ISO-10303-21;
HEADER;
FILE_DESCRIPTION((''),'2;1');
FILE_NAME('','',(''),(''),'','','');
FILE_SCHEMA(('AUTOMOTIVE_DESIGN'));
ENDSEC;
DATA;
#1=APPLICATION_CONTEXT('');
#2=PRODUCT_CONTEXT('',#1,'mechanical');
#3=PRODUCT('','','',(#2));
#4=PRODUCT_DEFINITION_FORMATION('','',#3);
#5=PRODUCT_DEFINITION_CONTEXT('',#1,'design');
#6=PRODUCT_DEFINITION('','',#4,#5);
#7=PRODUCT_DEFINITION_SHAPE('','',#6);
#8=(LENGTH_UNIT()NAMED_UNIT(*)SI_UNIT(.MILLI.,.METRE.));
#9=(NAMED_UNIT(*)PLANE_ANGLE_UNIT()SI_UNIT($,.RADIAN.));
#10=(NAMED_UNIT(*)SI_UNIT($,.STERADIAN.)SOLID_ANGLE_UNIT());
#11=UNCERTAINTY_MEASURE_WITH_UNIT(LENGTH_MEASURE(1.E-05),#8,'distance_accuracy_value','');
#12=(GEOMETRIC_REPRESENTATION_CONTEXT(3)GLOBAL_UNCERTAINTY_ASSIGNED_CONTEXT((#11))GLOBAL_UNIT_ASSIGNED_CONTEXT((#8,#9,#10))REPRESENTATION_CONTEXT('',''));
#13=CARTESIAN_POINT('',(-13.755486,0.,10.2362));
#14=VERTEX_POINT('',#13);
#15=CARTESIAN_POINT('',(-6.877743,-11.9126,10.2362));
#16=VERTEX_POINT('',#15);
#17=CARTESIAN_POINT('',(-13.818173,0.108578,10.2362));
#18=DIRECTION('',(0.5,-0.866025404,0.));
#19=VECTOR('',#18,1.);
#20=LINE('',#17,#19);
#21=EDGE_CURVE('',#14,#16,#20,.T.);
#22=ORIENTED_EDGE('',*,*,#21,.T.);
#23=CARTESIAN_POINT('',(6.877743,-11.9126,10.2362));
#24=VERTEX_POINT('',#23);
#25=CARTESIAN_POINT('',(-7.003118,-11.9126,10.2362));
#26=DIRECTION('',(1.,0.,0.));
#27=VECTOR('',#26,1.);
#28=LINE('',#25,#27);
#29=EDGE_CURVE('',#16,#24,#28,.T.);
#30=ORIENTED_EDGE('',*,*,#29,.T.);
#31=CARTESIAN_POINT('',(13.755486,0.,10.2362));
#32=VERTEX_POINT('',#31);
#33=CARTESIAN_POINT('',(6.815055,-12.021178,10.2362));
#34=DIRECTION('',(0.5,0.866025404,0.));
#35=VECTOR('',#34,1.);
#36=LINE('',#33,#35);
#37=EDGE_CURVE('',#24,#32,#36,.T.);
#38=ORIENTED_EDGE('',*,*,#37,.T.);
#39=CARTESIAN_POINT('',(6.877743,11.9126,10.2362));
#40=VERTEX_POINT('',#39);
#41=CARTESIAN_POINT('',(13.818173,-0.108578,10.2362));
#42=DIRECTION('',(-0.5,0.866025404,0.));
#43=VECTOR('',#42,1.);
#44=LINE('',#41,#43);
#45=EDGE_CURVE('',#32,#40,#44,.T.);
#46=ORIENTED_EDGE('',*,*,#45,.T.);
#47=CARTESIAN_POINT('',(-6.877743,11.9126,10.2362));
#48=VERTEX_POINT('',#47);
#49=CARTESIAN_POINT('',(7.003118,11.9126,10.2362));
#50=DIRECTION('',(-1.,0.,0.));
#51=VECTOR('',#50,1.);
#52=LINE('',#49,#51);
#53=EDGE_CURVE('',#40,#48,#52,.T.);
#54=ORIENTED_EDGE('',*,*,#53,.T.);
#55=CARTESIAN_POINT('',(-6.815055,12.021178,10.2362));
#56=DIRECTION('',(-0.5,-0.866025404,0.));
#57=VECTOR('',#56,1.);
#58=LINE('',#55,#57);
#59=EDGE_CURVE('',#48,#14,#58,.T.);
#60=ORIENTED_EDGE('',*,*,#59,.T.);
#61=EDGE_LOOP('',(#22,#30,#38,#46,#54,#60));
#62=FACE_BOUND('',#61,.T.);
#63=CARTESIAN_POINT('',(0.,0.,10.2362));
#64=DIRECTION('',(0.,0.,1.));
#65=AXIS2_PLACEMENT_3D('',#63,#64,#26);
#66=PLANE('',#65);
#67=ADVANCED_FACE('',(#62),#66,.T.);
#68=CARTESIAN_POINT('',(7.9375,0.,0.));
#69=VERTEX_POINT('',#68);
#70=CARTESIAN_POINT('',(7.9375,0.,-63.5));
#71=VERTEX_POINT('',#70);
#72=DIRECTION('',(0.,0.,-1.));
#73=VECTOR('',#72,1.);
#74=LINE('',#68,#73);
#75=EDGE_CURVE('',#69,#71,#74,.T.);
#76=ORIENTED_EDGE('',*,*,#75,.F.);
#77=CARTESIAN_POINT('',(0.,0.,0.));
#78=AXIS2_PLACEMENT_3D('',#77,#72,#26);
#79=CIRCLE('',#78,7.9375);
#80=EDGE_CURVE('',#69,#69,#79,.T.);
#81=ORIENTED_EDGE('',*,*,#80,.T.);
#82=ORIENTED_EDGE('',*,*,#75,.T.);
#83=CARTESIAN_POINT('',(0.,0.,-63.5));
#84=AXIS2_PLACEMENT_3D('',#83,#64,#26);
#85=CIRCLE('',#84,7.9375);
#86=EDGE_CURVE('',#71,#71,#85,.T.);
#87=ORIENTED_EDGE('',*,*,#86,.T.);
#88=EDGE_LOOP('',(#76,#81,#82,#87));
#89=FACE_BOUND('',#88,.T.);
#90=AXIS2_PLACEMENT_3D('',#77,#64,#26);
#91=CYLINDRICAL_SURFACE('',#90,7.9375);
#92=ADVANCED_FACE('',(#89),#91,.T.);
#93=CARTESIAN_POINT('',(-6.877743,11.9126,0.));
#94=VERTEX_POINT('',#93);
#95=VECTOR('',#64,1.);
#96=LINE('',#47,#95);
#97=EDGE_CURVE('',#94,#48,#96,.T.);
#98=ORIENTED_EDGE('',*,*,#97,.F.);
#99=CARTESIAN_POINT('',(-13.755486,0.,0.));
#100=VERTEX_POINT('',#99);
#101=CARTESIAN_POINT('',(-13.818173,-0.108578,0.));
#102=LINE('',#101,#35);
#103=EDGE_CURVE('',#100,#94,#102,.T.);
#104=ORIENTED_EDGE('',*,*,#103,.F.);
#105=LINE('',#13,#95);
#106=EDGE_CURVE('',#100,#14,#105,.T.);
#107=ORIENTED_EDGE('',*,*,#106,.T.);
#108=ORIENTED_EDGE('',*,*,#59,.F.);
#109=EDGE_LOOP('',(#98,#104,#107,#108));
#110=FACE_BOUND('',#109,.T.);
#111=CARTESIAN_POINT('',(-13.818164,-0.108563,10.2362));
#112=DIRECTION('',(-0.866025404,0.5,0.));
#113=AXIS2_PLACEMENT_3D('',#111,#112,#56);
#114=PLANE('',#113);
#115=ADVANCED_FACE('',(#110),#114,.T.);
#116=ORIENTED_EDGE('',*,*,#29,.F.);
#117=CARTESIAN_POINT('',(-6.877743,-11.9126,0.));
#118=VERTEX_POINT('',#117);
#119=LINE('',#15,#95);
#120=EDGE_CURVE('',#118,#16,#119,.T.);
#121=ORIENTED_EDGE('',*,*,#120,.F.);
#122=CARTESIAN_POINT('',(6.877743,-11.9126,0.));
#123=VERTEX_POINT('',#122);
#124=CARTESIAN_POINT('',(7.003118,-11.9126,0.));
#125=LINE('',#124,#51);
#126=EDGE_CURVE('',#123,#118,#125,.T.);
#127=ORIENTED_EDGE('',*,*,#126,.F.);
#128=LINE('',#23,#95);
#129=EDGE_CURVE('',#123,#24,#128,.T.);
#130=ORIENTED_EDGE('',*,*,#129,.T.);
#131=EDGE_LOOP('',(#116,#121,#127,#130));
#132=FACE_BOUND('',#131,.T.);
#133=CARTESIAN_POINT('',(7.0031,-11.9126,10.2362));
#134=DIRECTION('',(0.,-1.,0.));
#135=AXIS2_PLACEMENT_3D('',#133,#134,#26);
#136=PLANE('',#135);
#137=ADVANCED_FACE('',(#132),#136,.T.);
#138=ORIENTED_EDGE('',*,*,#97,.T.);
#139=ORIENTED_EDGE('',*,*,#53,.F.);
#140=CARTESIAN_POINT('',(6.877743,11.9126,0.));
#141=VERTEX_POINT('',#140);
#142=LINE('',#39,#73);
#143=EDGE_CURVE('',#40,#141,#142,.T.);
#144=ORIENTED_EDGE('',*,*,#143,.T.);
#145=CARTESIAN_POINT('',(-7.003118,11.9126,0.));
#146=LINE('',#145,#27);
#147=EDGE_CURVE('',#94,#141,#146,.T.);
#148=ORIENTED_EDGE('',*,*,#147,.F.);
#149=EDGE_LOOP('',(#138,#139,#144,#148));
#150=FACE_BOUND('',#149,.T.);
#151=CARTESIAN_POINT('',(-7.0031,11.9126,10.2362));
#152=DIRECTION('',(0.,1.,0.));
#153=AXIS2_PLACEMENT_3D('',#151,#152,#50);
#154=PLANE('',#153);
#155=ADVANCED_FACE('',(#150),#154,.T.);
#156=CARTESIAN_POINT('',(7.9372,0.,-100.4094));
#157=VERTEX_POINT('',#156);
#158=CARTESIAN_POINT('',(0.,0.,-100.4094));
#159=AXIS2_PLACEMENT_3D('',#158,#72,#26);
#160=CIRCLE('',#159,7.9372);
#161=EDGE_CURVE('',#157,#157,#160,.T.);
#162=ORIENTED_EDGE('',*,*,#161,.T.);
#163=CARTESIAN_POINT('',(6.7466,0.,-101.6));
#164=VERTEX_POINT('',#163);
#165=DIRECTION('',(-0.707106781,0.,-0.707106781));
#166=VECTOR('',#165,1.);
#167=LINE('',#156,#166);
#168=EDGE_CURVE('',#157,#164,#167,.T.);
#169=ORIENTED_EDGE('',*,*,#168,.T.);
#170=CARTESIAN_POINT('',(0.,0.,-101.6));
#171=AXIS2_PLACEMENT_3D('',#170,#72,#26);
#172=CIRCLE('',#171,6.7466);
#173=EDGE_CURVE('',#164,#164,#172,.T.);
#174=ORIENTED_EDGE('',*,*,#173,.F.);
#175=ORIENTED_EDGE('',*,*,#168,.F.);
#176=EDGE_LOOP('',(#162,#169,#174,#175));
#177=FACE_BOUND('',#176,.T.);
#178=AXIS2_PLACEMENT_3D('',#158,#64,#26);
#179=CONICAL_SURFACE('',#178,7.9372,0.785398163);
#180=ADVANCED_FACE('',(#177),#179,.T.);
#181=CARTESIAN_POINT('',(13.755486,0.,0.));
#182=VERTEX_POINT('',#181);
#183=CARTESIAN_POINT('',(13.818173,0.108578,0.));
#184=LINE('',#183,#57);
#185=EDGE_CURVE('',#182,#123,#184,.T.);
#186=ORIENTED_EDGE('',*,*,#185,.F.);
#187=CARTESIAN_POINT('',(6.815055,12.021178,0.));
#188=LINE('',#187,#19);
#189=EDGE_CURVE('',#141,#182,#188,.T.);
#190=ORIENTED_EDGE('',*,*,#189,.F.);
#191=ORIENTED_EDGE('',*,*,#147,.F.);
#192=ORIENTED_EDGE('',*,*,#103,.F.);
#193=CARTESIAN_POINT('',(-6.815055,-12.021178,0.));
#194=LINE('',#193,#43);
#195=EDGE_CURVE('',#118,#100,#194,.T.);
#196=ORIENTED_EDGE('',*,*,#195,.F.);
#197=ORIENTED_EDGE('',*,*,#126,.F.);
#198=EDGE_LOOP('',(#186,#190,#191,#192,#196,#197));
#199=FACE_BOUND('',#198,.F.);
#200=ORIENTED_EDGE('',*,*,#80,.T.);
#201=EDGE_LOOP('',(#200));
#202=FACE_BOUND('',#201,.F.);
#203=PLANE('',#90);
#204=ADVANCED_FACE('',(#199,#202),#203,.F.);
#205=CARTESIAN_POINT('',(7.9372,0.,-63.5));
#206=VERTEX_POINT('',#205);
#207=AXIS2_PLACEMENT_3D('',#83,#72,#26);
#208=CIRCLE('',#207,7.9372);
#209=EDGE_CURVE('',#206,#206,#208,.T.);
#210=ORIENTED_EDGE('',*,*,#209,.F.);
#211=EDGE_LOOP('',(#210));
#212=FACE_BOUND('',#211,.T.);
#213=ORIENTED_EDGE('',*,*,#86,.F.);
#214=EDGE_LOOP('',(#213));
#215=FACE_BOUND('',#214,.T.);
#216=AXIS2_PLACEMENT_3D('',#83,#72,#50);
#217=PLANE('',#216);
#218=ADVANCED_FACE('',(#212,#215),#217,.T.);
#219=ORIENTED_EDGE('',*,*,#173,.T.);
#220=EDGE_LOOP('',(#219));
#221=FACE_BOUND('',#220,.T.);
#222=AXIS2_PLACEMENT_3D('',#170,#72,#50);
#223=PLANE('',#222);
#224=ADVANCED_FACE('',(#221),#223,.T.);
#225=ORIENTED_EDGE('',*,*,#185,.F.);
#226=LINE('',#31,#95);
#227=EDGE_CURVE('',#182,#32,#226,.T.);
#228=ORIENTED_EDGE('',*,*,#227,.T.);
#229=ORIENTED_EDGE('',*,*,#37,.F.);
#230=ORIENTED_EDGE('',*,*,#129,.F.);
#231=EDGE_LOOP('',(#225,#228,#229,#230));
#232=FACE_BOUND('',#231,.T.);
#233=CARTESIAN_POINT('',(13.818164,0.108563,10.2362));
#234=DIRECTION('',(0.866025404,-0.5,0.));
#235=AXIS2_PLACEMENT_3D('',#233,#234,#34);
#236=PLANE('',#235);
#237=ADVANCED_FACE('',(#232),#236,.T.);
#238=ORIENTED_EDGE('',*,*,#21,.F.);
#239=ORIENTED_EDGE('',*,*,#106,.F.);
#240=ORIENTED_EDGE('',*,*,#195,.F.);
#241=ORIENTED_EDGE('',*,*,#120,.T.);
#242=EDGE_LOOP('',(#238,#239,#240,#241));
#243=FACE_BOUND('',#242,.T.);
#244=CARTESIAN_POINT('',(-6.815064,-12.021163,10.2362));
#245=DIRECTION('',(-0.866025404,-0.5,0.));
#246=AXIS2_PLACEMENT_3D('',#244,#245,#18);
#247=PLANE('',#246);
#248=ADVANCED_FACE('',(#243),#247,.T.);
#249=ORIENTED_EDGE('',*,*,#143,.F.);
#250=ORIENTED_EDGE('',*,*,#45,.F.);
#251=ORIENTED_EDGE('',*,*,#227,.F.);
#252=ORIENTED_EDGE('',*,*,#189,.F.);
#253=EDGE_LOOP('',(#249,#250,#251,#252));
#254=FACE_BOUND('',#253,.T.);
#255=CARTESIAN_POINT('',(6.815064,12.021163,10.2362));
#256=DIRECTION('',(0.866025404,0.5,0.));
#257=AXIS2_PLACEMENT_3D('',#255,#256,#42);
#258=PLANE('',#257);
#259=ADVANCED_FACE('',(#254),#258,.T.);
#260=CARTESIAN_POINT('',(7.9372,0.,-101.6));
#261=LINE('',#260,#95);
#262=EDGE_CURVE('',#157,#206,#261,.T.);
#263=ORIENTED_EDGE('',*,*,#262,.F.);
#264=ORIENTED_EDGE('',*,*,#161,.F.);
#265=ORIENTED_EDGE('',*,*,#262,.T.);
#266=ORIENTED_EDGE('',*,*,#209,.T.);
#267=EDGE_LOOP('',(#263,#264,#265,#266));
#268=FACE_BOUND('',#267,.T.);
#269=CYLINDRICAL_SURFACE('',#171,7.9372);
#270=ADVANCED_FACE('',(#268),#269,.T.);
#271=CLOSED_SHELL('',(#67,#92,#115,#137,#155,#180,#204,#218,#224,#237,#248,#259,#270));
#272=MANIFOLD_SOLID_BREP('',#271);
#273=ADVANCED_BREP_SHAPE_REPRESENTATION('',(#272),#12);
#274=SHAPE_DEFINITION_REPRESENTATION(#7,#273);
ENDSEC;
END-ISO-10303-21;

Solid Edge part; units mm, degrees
sketch "Sketch1" plane through (0, 0, 0) normal (0, 0, 1) x (1, 0, 0)
  circle A0 centre (0, 0) radius 13.8186
  dimension "D1" = 27.6372
extrude "Protrusion1" add sketch "Sketch1" along normal blind 10.2362
sketch "Sketch2" plane through (0, 0, 0) normal (0, 0, -1) x (1, 0, 0)
  circle A0 centre (0, 0) radius 7.9375
extrude "Protrusion2" add sketch "Sketch2" along normal blind 101.6
sketch "Sketch3" plane through (0, 0, -101.6) normal (0, 0, -1) x (1, 0, 0)
  circle A0 centre (0, 0) radius 7.9372
extrude "Cutout1" cut sketch "Sketch3" against normal blind 38.1 flip side to cut
chamfer "Chamfer_1" distance 1.1906 angle 45 1 edges at (-7.9372, 0, -101.6)
sketch "Sketch4" plane through (0, 0, 10.2362) normal (0, 0, 1) x (1, 0, 0)
  line L0 (-7.0031, 11.9126) -> (7.0031, 11.9126)
  dimension "D1" = 23.8252
extrude "Cutout2" cut sketch "Sketch4" against normal up to next material side at (0, 11.9626, 10.2362)
pattern_circular "Pattern1" count 6 over 360 about axis through (0, 0, 10.2362) along (0, 0, 1) of "Cutout2"
properties part number "107200"
